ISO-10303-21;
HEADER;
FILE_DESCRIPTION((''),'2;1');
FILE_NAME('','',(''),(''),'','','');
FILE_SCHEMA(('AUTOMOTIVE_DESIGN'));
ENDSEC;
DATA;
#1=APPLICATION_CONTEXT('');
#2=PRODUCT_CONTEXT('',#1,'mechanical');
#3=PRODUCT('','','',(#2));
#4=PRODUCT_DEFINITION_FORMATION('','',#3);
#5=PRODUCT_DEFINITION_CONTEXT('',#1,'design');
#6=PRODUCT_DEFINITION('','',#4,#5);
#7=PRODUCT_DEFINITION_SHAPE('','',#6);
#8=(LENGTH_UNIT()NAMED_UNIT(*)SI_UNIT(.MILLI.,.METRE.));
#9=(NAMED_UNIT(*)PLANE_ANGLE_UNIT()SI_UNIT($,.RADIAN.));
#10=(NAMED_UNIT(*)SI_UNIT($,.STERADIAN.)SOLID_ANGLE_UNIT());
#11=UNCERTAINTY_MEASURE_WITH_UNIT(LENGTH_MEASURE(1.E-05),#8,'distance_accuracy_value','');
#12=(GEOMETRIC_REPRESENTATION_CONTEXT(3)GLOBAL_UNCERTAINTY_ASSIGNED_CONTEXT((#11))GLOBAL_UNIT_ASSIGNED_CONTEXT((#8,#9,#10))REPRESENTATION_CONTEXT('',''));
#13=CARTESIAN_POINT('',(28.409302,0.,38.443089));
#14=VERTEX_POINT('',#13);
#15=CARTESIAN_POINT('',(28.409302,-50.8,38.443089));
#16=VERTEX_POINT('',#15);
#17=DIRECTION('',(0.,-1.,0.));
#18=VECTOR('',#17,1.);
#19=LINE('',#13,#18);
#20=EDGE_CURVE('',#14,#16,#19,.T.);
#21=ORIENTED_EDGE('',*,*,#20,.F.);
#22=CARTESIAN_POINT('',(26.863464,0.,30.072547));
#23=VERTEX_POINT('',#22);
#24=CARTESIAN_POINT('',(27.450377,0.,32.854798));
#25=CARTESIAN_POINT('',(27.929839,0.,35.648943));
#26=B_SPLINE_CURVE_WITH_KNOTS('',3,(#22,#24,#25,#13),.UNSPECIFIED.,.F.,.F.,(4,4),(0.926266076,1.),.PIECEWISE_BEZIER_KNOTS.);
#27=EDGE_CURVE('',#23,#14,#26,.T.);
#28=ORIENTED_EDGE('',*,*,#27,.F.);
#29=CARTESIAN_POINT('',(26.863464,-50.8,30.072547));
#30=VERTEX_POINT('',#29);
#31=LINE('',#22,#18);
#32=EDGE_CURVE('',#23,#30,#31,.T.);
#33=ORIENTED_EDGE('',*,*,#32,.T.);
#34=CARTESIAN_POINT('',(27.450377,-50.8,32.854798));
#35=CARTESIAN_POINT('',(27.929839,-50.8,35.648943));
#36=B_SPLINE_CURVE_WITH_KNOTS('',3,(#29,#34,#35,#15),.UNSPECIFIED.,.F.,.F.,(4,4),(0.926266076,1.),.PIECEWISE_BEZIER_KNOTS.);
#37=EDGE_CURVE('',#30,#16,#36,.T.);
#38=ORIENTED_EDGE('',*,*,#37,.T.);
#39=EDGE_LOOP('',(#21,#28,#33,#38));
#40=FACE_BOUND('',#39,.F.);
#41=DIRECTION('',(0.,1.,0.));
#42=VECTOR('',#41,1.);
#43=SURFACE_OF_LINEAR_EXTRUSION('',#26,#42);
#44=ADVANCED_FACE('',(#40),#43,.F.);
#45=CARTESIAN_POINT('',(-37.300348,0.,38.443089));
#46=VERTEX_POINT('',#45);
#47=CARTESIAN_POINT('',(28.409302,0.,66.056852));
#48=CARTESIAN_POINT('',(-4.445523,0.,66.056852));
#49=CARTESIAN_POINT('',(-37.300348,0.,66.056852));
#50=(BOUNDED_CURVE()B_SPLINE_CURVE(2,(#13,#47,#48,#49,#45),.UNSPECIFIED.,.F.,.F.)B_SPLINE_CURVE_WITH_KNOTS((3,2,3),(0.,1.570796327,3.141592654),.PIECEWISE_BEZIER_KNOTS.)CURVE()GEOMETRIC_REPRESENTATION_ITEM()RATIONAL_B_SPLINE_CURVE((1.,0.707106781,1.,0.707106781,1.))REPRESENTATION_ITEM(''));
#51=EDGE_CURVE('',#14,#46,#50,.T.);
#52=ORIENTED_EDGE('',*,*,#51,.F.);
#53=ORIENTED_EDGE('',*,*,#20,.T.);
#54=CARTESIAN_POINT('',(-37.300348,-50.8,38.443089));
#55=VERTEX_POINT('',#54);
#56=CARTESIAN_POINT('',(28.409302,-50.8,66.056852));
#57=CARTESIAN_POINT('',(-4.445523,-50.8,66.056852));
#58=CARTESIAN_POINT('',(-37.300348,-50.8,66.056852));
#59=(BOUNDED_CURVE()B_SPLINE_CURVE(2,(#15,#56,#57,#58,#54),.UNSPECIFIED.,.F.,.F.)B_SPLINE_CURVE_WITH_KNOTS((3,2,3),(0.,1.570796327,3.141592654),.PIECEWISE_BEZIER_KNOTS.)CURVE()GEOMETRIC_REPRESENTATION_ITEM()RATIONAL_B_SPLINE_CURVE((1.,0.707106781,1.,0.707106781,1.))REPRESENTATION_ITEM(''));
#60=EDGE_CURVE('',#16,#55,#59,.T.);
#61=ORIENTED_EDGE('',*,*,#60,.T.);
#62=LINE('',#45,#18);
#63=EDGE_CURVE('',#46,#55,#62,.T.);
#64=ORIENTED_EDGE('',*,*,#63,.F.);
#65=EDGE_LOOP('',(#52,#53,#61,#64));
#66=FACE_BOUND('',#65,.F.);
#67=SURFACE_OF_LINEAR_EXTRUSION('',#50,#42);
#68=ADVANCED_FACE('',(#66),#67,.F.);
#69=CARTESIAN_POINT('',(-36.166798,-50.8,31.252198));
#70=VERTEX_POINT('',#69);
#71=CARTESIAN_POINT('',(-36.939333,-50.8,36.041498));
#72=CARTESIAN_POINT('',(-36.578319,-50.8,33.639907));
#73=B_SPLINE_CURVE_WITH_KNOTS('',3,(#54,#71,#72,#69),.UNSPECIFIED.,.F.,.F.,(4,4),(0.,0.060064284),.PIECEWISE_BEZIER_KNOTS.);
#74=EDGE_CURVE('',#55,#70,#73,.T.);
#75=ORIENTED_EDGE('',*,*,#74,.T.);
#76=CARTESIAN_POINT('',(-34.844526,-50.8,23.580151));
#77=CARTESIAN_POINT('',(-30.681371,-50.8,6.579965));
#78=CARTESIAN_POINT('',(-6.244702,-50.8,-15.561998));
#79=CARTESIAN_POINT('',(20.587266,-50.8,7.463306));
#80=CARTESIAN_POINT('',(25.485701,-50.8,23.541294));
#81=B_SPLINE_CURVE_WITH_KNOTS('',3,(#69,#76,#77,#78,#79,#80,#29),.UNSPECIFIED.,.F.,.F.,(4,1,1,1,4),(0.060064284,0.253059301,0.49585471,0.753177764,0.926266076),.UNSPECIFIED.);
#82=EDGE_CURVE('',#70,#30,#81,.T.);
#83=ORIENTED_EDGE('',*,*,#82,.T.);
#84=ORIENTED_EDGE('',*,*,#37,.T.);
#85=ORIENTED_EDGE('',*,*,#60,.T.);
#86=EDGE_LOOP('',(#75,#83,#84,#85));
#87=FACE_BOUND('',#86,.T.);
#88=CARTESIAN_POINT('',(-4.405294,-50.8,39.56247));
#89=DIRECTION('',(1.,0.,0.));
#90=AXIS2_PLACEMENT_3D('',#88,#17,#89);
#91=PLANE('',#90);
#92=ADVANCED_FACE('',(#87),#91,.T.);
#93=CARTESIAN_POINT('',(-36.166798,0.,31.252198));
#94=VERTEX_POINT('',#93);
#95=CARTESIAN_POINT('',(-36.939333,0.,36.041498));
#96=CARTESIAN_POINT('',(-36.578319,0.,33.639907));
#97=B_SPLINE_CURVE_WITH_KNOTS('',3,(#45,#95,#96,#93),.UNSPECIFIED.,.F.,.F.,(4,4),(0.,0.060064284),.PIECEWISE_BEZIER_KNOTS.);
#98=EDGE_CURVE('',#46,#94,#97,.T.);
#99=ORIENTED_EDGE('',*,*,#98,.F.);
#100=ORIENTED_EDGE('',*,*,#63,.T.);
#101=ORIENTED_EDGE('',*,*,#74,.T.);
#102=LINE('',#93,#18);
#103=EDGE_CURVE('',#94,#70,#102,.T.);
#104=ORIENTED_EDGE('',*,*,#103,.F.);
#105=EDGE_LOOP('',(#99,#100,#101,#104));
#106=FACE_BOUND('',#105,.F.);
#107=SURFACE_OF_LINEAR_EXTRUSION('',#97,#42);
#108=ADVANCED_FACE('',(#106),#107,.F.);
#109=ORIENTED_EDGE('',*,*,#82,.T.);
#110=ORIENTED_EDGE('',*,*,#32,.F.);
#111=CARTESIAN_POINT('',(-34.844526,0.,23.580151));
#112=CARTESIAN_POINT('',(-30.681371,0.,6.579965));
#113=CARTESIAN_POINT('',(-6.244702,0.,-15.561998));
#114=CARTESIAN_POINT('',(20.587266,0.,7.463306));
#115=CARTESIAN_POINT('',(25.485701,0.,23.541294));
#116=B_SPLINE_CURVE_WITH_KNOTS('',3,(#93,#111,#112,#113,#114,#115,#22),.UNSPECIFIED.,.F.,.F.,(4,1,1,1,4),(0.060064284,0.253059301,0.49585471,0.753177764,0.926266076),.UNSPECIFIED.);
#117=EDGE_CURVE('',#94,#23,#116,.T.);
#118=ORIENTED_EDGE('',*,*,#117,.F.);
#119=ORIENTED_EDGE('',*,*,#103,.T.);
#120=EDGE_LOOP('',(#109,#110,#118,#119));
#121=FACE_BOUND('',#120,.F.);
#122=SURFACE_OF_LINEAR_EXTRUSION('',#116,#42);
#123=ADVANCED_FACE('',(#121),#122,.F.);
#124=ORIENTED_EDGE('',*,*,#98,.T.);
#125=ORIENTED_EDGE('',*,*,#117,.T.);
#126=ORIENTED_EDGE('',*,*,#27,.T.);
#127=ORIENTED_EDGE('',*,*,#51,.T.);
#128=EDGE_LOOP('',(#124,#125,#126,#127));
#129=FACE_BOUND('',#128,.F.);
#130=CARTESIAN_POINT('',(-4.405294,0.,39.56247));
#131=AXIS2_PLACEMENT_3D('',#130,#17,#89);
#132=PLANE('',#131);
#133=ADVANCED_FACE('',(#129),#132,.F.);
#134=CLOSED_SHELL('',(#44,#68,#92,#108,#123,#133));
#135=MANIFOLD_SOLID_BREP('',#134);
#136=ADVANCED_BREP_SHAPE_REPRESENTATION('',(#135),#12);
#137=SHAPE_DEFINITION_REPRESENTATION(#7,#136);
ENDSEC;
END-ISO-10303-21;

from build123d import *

# Parameters (mm, degrees)
F1_DEPTH = 50.8


with BuildPart() as f1:
    # F0 (on Front) → F1 (new body)
    with BuildSketch(Plane.XZ):
        with BuildLine():
            add(Edge.make_bspline(
                [(26.8634640441, 30.0725474095), (27.4503774573, 32.8547975525), (27.9298393949, 35.6489431931), (28.4093022346, 38.4430885315)],
                knots=[0.9262660757, 0.9262660757, 0.9262660757, 0.9262660757, 1, 1, 1, 1], degree=3))
            add(Edge.make_bspline(
                [(28.4093022346, 38.4430885315), (28.4093022346, 66.056851956), (-4.4455230236, 66.056851956), (-37.3003482819, 66.056851956), (-37.3003482819, 38.4430885315)],
                knots=[0, 0, 0, 1.5707963268, 1.5707963268, 3.1415926536, 3.1415926536, 3.1415926536], degree=2, weights=[1, 0.7071067812, 1, 0.7071067812, 1]))
            add(Edge.make_bspline(
                [(-37.3003482819, 38.4430885315), (-36.939333387, 36.041498013), (-36.5783185118, 33.6399074922), (-36.1667983256, 31.2521979805)],
                knots=[0, 0, 0, 0, 0.0600642843, 0.0600642843, 0.0600642843, 0.0600642843], degree=3))
            add(Edge.make_bspline(
                [(-36.1667983256, 31.2521979805), (-7.0407045556, -59.5095977908), (26.8634640441, 30.0725474095)],
                knots=[3.405039124, 3.405039124, 3.405039124, 5.9752105426, 5.9752105426, 5.9752105426], degree=2, weights=[1, 0.2818393326, 1]))
        make_face()
        with BuildLine():
            add(Edge.make_bspline(
                [(-36.1667983256, 31.2521979805), (-34.8445259273, 23.5801505614), (-30.6813709026, 6.5799650339), (-6.2447021875, -15.5619977157), (20.5872658458, 7.4633058375), (25.4857013307, 23.5412935316), (26.8634640441, 30.0725474095)],
                knots=[0.0600642843, 0.0600642843, 0.0600642843, 0.0600642843, 0.2530593012, 0.4958547101, 0.7531777644, 0.9262660757, 0.9262660757, 0.9262660757, 0.9262660757], degree=3))
            add(Edge.make_bspline(
                [(-36.1667983256, 31.2521979805), (-7.0407045556, -59.5095977908), (26.8634640441, 30.0725474095)],
                knots=[3.405039124, 3.405039124, 3.405039124, 5.9752105426, 5.9752105426, 5.9752105426], degree=2, weights=[1, 0.2818393326, 1]))
        make_face()
    extrude(amount=F1_DEPTH)


solid = f1.part
